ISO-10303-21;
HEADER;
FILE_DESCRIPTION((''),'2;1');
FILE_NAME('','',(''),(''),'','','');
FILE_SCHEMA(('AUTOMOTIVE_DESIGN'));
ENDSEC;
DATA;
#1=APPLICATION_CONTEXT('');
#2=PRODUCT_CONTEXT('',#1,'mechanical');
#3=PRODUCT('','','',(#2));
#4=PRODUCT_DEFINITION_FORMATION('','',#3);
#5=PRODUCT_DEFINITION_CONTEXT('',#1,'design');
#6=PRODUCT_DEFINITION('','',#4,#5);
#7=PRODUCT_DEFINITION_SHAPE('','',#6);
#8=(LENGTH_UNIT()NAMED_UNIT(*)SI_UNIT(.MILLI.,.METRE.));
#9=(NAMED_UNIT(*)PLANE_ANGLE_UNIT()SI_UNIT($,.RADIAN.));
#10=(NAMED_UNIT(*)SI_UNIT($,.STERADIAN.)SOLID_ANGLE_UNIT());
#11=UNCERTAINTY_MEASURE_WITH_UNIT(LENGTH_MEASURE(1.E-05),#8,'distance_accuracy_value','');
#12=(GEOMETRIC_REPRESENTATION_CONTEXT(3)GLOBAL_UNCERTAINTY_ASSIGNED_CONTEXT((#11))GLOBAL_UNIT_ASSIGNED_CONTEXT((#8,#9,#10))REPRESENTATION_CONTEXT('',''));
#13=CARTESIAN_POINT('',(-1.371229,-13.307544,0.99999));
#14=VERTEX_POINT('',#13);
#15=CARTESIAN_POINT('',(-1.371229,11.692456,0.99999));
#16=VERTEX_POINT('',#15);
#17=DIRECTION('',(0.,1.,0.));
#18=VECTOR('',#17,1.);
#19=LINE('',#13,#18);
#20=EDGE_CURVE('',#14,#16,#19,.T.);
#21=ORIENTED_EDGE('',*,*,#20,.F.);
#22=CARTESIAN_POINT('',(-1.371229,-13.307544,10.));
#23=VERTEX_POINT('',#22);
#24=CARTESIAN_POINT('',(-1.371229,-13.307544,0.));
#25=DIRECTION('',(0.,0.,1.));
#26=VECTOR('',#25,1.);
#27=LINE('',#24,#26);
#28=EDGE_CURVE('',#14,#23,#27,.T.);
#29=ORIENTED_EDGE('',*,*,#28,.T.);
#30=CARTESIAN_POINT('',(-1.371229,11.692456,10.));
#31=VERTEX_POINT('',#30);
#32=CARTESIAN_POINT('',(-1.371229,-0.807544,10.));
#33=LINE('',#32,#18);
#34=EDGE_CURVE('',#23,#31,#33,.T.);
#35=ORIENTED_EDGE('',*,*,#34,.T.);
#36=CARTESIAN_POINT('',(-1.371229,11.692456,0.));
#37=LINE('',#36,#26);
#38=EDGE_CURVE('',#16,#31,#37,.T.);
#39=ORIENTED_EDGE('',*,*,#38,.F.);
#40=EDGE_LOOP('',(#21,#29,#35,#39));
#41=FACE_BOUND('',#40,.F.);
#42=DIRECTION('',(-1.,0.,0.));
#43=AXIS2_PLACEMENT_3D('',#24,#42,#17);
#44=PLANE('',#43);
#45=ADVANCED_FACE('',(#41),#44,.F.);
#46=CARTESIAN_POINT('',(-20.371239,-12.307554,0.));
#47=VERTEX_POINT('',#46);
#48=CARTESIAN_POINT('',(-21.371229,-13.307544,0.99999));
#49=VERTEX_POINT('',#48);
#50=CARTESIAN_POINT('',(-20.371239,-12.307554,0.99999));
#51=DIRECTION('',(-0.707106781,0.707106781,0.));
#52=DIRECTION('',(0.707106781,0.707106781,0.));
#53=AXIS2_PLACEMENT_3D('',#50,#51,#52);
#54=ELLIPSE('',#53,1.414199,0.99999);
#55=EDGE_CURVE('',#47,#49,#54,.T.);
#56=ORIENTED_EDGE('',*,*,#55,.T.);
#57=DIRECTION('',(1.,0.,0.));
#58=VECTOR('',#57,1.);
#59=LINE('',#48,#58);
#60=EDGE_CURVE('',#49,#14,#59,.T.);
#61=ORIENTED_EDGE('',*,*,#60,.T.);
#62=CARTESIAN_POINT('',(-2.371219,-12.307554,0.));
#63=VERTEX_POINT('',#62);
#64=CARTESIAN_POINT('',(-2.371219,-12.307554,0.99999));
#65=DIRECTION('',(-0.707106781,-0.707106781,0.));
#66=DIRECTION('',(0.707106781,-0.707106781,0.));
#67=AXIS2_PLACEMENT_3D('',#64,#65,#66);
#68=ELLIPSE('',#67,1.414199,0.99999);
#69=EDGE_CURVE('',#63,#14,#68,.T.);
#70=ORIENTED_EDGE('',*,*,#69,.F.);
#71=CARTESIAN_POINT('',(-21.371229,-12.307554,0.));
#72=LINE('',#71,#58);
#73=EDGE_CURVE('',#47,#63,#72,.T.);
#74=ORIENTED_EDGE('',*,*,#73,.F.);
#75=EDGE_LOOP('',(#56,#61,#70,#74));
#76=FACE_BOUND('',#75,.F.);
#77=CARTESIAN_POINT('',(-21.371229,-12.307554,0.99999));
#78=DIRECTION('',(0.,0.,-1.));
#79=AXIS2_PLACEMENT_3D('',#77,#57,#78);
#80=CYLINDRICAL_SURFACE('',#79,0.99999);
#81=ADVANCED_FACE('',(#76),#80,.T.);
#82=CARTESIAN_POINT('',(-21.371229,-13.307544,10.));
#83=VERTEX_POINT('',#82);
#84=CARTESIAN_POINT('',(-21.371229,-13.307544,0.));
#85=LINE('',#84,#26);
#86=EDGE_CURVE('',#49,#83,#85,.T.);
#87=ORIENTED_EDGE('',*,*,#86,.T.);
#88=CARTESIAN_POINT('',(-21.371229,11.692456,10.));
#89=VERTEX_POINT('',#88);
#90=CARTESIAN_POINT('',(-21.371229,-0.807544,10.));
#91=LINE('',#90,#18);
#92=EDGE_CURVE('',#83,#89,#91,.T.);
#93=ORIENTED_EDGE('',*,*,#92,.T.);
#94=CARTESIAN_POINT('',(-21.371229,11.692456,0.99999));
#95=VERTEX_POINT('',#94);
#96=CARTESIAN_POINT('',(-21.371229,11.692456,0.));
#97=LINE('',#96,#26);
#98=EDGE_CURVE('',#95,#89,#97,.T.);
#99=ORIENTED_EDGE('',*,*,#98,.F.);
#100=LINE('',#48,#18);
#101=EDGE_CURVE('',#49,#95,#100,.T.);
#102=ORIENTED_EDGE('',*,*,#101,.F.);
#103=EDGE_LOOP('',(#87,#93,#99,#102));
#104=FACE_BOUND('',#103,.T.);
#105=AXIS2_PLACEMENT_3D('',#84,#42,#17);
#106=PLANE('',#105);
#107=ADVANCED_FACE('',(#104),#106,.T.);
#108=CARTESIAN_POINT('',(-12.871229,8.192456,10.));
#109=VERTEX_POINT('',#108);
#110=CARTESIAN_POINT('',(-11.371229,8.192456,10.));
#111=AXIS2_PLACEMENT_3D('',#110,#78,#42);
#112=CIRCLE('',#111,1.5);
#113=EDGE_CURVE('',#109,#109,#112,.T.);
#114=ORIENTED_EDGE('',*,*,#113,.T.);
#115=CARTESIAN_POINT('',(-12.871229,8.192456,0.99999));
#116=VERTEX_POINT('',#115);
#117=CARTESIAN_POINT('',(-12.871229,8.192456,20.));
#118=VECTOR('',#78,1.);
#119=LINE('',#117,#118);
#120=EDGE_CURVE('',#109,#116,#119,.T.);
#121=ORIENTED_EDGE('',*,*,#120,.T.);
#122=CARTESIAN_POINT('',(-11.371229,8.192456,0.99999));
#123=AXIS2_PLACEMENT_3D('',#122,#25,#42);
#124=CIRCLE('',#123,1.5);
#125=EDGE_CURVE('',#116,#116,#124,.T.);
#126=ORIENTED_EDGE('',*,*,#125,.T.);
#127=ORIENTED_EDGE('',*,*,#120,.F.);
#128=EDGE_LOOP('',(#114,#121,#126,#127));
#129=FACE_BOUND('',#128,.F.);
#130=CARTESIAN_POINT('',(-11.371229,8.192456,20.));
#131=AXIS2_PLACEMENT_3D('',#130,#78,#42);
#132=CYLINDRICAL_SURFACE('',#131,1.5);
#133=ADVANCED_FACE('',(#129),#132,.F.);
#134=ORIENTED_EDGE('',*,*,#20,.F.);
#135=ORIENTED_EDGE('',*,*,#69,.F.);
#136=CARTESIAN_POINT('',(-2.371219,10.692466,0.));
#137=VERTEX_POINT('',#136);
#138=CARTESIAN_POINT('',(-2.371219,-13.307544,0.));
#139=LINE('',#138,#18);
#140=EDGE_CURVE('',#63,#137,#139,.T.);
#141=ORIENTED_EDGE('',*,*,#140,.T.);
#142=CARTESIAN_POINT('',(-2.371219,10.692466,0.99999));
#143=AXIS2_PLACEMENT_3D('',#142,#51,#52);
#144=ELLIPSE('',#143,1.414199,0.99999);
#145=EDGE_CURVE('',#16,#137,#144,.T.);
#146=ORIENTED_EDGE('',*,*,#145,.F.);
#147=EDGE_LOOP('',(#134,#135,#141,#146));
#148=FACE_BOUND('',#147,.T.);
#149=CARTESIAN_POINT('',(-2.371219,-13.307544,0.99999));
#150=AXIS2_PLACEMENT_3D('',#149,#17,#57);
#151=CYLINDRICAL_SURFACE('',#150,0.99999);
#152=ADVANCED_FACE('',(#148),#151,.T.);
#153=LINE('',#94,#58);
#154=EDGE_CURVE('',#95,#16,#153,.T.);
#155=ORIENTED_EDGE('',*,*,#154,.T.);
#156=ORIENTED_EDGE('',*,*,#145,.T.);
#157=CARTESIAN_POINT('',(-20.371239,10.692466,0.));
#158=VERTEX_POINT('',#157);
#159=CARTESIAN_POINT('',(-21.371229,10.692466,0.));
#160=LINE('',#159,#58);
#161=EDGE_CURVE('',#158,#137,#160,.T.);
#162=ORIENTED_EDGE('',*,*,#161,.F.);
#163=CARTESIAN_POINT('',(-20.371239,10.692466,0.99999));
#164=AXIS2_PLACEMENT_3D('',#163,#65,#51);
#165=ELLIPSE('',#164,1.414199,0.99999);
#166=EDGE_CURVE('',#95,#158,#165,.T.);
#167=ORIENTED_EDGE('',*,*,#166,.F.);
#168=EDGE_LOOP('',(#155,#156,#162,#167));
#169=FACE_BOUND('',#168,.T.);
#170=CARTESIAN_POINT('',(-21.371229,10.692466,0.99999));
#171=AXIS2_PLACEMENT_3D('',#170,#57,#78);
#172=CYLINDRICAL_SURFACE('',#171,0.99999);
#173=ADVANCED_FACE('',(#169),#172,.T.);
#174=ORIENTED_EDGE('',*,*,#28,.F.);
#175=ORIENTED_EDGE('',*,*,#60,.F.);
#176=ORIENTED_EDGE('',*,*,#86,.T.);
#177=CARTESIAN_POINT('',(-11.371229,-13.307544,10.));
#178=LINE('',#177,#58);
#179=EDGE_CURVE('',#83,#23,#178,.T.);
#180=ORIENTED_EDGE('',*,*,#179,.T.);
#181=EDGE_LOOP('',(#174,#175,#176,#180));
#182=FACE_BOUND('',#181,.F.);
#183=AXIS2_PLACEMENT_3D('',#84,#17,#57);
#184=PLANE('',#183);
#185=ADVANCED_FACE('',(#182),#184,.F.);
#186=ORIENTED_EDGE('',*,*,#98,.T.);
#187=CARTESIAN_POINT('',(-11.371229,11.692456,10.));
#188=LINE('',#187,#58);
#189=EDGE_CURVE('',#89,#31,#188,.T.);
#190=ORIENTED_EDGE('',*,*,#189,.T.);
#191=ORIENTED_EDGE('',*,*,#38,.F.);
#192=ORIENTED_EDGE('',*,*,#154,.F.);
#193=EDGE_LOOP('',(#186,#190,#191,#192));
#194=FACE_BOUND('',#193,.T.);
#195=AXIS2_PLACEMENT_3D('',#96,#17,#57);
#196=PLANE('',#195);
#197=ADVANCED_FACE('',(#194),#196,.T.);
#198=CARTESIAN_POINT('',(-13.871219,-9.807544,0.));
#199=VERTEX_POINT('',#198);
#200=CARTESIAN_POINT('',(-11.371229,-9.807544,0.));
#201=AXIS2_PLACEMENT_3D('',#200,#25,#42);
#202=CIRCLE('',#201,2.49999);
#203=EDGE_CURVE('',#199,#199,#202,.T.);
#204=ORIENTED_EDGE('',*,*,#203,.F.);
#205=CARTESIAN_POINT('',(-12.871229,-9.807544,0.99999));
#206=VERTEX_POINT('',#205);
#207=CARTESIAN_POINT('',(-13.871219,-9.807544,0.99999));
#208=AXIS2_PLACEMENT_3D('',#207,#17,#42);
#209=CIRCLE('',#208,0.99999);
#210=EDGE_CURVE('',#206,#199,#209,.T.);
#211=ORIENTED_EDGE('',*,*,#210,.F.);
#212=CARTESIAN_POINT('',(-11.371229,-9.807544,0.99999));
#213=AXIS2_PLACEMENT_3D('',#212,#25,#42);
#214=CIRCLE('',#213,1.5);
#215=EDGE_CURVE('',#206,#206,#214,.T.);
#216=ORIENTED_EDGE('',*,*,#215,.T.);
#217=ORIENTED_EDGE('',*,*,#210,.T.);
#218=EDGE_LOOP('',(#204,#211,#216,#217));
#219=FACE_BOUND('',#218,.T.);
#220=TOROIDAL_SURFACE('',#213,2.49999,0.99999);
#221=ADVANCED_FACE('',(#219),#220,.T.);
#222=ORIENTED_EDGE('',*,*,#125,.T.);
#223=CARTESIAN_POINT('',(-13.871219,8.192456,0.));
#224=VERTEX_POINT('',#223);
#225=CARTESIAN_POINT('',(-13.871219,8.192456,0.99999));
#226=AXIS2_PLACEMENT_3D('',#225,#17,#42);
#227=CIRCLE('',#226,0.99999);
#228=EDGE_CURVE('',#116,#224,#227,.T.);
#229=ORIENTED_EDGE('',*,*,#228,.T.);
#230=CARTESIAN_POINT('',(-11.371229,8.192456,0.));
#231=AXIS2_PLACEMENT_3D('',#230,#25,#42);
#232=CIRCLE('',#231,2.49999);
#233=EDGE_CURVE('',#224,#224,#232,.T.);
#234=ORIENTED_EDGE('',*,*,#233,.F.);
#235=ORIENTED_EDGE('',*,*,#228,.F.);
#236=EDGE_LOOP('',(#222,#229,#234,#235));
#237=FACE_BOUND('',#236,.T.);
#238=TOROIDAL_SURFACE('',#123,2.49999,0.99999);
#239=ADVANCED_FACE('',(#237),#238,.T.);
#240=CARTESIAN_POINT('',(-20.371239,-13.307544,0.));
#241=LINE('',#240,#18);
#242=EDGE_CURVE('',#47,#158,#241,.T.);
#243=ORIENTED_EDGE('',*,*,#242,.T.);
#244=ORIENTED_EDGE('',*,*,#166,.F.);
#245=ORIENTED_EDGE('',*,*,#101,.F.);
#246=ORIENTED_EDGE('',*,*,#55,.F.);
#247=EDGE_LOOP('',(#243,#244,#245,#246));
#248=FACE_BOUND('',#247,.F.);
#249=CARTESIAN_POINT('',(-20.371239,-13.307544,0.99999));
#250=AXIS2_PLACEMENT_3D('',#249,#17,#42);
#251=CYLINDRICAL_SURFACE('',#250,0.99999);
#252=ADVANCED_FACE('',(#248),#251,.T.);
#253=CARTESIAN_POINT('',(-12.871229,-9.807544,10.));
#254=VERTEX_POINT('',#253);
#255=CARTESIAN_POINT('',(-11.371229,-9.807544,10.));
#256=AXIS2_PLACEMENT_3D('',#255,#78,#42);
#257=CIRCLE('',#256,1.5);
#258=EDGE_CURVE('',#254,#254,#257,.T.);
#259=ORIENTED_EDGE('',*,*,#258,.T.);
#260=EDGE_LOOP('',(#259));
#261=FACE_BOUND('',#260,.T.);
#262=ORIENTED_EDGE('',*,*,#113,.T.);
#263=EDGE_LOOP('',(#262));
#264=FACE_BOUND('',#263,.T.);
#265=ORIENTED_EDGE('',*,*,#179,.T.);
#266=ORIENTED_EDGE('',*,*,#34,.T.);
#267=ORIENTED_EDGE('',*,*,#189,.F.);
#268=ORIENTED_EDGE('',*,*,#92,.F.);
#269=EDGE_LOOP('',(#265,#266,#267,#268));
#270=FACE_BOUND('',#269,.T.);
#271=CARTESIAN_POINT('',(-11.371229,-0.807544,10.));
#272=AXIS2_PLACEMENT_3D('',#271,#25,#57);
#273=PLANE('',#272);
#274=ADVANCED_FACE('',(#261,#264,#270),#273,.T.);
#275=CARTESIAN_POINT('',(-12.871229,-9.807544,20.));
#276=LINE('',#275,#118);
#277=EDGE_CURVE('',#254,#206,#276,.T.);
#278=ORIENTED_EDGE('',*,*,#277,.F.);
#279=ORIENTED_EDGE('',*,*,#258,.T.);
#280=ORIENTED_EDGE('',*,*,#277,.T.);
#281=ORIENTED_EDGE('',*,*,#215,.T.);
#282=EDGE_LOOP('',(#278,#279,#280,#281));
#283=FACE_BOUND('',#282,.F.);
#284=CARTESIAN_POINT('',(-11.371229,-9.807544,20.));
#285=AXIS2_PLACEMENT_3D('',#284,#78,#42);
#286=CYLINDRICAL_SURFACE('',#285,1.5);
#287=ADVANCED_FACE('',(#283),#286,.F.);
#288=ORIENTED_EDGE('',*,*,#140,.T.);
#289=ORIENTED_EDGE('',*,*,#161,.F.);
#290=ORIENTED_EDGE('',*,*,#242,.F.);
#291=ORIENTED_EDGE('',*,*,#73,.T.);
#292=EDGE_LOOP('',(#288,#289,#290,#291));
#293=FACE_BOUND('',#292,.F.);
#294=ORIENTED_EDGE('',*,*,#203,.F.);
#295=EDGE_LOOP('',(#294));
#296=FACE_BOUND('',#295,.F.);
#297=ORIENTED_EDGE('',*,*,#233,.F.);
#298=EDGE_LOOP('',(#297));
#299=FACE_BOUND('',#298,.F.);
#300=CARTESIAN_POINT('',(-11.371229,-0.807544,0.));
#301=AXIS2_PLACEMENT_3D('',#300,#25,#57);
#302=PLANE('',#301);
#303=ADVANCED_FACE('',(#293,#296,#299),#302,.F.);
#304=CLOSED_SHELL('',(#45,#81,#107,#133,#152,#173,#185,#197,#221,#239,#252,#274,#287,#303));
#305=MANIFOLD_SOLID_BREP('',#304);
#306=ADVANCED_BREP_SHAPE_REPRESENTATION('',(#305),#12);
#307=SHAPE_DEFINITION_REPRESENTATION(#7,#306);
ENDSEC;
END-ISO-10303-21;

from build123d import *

# Parameters (mm, degrees)
F0_W     = 20
F0_H     = 25
F1_DEPTH = 10
F3_D     = 3
F3_DEPTH = 10
F3_TIP   = 0.9012909285
F4_R     = 0.99999


# Not quite as in the source:
# - a fillet or chamfer is up to 0.001 mm smaller than in the source, because OpenCascade refuses the exact size


with BuildPart() as f1:
    # F0 (on Top) → F1 (new body)
    with BuildSketch(Plane.XY):
        with Locations((-11.3712290768, -0.8075441738)):
            Rectangle(F0_W, F0_H)
    extrude(amount=F1_DEPTH)

    # F3
    with Locations(Plane.XY.offset(10)):
        with Locations((-11.3712290768, 8.1924558262), (-11.3712290768, -9.8075441738)):
            Hole(F3_D / 2, depth=F3_DEPTH)
            with Locations((0, 0, -(F3_DEPTH + F3_TIP / 2))):  # 118° drill point
                Cone(0, F3_D / 2, F3_TIP, mode=Mode.SUBTRACT)

    # F4 (radius 1 in the source; OpenCascade refuses exactly that, so slightly less here)
    f4_edges = [f1.edges().sort_by_distance(p)[0] for p in [
        (-11.371229, -13.307544, 0),
        (-21.371229, -0.807544, 0),
        (-1.371229, -0.807544, 0),
        (-11.371229, 11.692456, 0),
        (-12.871229, -9.807544, 0),
        (-12.871229, 8.192456, 0),
    ]]
    fillet(f4_edges, radius=F4_R)


solid = f1.part
